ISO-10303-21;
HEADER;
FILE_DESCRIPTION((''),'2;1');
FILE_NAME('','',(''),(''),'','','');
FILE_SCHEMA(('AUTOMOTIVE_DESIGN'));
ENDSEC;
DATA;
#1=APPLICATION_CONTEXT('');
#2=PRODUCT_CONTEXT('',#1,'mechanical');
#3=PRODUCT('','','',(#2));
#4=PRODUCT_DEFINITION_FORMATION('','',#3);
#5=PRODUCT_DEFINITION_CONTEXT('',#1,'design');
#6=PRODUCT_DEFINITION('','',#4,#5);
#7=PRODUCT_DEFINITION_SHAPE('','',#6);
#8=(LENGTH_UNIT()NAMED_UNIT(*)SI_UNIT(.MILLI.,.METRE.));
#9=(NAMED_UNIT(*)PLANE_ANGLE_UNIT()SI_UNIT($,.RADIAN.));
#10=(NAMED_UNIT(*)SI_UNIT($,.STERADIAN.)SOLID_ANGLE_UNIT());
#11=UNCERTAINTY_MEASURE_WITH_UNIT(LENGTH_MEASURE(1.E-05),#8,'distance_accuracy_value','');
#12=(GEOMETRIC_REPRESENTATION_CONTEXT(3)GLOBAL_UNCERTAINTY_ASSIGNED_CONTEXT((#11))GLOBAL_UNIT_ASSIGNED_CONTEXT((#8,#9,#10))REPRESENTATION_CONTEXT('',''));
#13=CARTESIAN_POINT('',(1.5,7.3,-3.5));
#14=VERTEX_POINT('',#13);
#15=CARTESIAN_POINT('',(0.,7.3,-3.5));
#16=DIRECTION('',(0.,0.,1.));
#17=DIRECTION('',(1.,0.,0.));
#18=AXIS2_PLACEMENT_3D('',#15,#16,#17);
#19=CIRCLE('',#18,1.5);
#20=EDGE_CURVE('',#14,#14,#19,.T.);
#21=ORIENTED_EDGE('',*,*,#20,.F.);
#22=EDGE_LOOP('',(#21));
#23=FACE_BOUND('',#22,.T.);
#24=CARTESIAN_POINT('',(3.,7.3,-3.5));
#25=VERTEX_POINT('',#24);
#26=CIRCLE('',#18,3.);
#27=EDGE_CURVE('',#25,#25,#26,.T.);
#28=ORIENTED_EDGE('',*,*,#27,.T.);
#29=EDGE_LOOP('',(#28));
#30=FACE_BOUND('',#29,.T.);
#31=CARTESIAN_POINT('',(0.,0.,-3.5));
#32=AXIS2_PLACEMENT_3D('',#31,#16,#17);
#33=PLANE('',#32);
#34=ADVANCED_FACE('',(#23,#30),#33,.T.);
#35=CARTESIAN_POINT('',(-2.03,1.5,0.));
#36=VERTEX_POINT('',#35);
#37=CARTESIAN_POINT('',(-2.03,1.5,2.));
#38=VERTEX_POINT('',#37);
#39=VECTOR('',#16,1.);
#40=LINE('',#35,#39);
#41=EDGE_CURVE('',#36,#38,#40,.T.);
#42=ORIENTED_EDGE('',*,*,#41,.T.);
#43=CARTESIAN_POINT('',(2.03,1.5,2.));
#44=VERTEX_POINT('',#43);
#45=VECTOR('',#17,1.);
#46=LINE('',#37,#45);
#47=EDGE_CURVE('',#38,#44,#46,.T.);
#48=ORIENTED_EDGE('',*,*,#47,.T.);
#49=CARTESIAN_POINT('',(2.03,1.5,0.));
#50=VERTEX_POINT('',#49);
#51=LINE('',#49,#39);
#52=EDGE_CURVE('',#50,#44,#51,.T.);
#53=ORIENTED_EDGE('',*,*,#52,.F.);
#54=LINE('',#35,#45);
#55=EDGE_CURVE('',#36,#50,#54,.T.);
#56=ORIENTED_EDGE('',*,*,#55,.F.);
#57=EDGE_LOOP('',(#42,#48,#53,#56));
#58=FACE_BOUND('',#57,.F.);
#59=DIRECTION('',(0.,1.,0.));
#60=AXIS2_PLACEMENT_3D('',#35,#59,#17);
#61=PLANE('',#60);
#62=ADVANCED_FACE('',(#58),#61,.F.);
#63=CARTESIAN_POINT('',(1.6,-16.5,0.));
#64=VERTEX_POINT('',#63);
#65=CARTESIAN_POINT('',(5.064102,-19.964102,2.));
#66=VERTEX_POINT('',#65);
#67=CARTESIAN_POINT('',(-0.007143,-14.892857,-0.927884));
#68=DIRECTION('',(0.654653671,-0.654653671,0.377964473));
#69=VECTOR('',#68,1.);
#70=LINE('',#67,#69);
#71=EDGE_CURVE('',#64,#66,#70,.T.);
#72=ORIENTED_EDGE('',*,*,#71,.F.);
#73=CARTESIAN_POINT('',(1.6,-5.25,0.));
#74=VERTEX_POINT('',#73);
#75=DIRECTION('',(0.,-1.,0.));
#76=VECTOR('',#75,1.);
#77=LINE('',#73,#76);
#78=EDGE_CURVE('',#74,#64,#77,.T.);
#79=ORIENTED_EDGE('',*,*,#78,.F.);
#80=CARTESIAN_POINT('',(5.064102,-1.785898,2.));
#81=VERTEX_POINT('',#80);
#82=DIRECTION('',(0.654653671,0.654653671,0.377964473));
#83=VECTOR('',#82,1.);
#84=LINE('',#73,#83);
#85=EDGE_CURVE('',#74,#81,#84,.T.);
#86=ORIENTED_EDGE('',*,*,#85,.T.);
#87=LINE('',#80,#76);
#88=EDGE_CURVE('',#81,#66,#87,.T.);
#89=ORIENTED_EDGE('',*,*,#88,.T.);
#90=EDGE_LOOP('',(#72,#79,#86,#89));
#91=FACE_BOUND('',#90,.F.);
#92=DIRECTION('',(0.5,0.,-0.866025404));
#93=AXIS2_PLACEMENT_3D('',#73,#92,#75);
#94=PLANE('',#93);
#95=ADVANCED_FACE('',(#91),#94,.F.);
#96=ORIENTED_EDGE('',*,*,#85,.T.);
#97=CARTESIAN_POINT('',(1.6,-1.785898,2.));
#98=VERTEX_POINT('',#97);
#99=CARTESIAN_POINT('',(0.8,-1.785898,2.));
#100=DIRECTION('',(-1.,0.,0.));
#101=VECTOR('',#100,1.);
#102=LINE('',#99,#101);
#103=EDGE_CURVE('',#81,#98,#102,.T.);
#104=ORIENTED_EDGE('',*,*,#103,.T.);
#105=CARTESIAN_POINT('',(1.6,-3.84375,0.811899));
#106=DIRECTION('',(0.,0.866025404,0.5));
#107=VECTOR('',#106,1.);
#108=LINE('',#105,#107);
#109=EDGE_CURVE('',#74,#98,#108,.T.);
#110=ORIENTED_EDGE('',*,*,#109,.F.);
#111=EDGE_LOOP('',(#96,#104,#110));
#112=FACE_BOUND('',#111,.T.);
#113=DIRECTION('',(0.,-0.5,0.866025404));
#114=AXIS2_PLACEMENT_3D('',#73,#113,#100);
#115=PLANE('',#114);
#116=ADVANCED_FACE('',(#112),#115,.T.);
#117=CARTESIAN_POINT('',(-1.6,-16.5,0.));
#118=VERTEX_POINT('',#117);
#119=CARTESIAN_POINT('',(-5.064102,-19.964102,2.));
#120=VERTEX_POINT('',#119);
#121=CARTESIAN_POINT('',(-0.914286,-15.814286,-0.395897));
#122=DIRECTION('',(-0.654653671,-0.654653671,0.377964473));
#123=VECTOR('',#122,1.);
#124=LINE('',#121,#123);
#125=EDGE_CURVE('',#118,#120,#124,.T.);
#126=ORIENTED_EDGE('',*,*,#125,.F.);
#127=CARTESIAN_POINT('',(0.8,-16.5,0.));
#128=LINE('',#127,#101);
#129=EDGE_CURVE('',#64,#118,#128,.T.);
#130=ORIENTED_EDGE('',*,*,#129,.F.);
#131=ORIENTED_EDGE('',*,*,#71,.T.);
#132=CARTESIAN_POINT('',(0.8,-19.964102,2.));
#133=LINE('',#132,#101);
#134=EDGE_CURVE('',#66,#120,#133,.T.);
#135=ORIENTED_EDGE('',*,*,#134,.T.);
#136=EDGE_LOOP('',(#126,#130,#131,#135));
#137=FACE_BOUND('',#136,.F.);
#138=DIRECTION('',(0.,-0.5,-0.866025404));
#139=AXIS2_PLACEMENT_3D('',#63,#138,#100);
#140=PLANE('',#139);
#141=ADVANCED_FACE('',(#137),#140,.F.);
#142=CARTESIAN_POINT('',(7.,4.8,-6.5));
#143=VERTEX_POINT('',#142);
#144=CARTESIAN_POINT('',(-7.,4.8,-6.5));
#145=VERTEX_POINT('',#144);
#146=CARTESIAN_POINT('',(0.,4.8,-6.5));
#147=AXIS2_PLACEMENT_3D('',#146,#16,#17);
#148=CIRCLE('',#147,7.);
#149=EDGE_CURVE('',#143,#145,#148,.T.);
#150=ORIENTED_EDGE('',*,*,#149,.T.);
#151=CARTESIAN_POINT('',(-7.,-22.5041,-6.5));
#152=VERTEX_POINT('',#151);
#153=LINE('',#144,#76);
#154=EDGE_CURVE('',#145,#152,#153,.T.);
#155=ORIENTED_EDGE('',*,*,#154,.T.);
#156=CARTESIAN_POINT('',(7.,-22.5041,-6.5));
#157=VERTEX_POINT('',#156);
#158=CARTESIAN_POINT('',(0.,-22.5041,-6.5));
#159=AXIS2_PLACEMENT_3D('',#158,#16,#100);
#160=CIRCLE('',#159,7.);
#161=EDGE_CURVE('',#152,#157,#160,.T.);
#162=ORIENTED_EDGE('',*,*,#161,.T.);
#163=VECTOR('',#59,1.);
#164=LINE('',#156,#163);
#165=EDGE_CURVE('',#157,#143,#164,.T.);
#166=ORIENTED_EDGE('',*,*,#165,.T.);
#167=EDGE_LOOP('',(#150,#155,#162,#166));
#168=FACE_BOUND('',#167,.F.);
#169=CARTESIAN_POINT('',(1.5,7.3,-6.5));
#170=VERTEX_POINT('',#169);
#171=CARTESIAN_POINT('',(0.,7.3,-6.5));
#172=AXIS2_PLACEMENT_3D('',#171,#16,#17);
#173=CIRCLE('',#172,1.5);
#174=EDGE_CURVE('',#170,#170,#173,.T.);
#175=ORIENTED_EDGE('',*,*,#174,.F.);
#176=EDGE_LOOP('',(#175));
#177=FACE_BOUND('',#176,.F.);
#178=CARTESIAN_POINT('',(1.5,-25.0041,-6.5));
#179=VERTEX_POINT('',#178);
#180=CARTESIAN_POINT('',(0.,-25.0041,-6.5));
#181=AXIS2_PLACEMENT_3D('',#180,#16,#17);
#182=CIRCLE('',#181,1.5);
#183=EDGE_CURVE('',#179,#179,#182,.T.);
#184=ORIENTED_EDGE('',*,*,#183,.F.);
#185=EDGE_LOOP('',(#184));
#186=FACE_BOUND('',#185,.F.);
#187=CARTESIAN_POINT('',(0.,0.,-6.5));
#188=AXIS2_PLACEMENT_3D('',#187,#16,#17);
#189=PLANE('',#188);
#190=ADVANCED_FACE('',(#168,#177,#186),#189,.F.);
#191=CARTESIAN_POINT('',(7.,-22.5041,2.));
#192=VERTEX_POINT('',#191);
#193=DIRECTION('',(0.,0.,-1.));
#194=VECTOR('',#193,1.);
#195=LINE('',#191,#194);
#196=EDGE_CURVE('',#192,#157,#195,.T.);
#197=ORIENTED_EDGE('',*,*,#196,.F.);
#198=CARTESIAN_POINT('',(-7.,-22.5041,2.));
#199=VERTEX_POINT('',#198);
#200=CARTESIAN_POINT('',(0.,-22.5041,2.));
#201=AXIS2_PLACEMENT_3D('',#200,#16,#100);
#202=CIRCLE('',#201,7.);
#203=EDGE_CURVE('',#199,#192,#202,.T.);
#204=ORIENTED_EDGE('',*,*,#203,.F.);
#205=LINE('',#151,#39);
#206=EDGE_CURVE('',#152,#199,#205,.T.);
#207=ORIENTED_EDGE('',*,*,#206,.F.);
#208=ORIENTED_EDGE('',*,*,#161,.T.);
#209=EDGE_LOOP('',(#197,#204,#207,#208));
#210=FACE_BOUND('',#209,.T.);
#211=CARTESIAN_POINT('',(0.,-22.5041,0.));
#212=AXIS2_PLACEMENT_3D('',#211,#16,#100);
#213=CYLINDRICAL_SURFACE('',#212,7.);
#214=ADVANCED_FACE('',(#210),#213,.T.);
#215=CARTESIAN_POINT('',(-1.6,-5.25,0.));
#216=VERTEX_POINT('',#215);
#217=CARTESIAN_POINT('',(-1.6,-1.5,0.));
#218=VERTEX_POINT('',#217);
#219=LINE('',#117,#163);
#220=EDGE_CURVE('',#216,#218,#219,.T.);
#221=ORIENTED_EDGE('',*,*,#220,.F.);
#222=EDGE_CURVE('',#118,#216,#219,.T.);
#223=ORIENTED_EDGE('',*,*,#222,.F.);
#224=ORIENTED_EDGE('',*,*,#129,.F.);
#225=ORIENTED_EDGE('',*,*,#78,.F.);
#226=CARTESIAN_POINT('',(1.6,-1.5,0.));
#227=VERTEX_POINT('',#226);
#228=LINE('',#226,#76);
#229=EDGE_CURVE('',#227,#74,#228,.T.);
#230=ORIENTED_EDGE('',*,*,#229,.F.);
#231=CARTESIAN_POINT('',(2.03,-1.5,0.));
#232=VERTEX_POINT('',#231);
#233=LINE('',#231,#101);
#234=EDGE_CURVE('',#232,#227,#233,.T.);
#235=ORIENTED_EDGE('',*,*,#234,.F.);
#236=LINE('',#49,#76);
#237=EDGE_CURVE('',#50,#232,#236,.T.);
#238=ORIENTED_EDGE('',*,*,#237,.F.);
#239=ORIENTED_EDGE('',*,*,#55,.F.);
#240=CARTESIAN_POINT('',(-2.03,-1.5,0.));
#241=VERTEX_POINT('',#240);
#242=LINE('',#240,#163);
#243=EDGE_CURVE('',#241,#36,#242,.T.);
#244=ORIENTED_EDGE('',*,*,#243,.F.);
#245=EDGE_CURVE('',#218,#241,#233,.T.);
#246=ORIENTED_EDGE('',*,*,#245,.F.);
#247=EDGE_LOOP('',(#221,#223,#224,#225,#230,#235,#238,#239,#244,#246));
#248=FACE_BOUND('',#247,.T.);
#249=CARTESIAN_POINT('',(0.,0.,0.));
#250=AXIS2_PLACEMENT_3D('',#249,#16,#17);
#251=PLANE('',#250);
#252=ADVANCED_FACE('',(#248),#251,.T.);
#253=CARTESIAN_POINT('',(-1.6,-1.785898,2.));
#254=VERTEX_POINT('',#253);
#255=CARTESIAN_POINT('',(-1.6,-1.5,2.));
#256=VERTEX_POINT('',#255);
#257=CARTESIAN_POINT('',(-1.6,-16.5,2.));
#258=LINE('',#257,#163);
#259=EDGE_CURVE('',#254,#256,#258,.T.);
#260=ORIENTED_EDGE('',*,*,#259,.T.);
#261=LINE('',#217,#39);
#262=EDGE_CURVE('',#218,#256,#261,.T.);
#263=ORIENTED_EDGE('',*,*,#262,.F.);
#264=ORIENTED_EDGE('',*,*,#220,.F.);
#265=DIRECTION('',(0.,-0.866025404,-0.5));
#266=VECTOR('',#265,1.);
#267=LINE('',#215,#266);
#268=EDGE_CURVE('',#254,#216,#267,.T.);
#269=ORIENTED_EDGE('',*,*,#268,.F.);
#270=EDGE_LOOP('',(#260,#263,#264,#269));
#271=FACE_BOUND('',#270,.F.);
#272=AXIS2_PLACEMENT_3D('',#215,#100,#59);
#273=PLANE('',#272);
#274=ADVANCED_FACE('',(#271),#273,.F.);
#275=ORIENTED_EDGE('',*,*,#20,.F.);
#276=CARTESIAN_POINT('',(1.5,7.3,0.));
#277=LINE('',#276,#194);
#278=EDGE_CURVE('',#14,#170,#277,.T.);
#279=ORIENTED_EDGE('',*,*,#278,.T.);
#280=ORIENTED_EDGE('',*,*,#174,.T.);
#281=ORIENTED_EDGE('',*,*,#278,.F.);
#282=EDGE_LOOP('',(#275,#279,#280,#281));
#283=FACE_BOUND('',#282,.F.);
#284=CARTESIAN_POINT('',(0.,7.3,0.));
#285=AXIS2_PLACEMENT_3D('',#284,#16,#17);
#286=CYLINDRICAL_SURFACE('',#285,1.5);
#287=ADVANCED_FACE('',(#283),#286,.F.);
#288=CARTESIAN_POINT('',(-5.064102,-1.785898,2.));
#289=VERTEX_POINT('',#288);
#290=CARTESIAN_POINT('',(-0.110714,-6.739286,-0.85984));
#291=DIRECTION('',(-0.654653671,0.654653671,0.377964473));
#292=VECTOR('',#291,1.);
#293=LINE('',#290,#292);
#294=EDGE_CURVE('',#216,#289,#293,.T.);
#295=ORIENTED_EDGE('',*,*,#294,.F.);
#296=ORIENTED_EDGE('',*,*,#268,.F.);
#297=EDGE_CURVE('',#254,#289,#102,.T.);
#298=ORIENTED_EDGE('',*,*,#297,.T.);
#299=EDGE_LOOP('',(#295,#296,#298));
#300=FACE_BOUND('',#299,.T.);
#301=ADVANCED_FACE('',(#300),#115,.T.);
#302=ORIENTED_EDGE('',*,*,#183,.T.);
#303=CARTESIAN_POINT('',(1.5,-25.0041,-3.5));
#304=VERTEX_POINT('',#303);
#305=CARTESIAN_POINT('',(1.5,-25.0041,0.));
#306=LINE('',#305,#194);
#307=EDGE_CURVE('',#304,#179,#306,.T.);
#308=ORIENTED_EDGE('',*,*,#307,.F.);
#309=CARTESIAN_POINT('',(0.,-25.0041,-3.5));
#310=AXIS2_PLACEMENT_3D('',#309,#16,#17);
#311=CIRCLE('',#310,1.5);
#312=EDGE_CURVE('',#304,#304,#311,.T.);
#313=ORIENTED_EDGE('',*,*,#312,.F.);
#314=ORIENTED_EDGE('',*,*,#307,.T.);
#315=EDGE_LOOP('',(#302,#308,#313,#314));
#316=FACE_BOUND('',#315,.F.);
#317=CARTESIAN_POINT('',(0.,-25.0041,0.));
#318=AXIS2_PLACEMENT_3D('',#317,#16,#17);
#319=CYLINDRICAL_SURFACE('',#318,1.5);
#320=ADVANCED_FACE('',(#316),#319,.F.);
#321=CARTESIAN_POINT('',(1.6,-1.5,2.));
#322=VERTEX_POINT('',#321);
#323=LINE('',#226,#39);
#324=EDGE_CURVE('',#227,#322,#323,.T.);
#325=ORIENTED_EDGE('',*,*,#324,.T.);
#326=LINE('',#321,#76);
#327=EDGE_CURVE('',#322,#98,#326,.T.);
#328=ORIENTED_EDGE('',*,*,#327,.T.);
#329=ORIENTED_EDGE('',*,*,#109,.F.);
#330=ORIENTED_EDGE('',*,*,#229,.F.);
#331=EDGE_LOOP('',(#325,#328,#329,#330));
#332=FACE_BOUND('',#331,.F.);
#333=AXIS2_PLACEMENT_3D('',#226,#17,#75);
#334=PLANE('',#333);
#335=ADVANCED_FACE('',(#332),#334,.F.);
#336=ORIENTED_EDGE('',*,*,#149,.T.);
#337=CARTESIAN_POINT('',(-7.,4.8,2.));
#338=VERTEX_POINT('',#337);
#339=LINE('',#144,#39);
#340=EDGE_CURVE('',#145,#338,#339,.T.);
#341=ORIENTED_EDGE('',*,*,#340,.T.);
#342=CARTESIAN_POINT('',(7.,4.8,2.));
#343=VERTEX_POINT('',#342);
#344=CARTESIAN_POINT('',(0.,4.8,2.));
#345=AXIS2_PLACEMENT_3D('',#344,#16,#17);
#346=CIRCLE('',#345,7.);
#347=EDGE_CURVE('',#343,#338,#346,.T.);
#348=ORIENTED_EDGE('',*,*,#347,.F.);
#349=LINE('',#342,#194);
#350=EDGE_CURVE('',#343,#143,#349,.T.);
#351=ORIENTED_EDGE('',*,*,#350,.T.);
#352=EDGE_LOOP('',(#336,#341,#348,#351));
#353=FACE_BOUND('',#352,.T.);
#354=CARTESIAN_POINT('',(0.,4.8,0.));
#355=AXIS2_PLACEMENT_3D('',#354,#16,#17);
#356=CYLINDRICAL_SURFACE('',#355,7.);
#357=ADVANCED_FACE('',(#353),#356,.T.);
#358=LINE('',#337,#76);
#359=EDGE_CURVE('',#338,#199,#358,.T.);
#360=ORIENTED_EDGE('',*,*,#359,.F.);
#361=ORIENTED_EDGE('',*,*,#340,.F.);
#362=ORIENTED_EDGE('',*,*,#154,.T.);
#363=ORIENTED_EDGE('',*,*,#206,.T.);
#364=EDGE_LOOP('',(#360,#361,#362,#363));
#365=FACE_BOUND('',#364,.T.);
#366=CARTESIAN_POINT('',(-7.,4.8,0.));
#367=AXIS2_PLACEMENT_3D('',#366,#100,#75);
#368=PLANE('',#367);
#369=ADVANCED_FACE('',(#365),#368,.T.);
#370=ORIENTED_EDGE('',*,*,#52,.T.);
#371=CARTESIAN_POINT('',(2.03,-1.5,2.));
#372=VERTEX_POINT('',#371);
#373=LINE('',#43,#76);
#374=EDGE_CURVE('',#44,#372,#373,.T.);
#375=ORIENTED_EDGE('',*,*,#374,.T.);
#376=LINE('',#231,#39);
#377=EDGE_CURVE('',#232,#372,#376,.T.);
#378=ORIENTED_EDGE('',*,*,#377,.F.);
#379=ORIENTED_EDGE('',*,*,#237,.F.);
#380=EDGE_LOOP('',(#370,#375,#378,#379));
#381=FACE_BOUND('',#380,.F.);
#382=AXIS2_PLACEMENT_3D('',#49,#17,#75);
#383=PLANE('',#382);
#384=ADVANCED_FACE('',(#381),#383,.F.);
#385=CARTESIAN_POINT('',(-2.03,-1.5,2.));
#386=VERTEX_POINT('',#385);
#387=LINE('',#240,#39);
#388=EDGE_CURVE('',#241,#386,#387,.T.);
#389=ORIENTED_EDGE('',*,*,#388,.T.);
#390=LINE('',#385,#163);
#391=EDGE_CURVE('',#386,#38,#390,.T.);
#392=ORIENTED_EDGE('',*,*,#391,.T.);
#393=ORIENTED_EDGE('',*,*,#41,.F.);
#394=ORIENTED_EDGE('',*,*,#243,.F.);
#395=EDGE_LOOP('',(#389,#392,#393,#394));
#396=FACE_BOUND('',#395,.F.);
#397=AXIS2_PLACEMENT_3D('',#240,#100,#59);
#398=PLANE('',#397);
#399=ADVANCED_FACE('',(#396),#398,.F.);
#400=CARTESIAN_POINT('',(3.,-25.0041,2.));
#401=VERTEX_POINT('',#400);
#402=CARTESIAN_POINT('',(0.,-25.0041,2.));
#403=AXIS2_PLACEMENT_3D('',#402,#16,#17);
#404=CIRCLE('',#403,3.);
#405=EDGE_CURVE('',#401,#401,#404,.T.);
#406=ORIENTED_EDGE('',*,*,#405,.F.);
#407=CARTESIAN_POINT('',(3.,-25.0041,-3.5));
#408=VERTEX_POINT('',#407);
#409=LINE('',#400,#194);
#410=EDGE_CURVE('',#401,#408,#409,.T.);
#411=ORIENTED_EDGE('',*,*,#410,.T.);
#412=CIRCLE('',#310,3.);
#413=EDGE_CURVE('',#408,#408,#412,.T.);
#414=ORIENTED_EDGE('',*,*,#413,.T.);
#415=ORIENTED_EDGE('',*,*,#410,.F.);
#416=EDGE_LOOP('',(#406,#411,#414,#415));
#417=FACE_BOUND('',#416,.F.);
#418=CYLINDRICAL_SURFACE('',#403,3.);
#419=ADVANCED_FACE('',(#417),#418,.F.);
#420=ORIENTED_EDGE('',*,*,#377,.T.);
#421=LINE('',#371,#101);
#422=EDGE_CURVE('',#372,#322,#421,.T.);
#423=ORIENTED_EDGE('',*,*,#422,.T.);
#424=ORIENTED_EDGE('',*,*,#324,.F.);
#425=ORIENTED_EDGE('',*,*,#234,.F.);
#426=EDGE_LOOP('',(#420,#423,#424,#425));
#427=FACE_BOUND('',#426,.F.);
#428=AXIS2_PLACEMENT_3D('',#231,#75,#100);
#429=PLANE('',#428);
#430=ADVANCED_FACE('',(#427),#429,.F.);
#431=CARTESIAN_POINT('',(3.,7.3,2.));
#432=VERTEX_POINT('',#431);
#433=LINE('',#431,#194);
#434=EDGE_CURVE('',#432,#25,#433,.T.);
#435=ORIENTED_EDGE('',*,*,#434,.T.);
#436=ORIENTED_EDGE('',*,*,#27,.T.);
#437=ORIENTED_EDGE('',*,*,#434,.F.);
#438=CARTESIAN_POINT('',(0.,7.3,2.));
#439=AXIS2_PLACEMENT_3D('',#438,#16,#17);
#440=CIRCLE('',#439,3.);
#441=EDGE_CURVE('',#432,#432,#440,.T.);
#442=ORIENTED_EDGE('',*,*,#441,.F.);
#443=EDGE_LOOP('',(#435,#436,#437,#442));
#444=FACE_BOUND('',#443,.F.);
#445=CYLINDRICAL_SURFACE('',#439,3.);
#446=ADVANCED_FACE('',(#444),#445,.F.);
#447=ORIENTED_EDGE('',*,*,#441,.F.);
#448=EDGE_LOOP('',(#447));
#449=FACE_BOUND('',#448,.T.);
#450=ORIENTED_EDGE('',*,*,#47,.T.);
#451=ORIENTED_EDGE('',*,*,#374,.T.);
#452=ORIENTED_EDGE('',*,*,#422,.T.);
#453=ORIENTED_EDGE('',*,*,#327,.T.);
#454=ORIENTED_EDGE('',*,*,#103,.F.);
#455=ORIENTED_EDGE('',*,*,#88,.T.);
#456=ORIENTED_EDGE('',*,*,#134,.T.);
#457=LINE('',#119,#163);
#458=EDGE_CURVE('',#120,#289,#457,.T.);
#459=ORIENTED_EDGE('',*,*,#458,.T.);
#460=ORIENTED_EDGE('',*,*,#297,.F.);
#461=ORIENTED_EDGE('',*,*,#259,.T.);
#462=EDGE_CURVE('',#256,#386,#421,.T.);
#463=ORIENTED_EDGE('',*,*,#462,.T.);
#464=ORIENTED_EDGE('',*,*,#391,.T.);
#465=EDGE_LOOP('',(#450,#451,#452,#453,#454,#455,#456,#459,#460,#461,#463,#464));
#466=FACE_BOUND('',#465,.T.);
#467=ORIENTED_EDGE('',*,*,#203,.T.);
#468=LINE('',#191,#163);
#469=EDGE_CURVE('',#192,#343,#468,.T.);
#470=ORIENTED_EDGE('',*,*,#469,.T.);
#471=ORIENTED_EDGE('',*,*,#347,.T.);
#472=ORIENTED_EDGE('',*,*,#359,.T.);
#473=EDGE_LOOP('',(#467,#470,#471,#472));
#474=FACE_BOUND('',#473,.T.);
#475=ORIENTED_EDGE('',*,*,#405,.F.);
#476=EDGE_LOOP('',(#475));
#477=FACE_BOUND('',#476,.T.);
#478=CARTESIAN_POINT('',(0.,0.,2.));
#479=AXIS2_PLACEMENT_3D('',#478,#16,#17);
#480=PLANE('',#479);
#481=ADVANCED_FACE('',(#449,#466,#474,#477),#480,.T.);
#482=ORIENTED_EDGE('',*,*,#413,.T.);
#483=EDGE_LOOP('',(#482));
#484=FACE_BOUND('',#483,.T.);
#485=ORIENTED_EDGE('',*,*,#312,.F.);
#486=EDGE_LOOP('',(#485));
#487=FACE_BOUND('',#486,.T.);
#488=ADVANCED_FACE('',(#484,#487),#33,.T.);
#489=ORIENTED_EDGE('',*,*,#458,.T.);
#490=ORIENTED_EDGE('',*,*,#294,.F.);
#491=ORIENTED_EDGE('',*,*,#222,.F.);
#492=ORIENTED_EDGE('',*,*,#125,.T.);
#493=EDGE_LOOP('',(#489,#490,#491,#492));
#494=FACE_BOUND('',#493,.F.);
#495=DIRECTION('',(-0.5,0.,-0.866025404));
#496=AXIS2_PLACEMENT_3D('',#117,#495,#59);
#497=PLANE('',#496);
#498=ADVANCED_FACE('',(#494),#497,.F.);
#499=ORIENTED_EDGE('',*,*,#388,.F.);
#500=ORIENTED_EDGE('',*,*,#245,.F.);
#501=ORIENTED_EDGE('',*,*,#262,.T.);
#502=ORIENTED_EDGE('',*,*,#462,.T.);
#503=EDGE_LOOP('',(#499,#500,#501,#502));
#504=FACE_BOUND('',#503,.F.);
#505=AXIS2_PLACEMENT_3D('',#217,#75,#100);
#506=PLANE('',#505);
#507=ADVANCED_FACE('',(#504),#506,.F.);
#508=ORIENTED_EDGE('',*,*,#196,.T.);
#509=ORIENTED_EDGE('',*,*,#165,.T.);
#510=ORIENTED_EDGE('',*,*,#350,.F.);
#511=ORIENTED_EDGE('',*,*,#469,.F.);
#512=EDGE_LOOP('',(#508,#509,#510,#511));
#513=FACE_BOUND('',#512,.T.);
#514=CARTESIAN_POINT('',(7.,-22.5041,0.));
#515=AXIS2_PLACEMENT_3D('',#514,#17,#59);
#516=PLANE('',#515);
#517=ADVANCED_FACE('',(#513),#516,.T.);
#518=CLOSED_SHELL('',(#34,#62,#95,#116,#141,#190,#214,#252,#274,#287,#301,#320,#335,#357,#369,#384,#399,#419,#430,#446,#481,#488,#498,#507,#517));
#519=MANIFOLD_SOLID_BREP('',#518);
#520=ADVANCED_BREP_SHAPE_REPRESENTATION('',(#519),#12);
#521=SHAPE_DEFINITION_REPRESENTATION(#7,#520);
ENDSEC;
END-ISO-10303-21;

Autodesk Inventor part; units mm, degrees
ref_plane "YZ Plane" through (0, 0, 0) normal (1, 0, 0) x (0, 1, 0)
ref_plane "XZ Plane" through (0, 0, 0) normal (0, 1, 0) x (-1, 0, 0)
ref_plane "XY Plane" through (0, 0, 0) normal (0, 0, 1) x (1, 0, 0)
sketch "Эскиз1" plane through (0, 0, 0) normal (0, 0, 1) x (1, 0, 0)
  line L0 (-2.03, 1.5) -> (2.03, 1.5)
  line L1 (2.03, 1.5) -> (2.03, -1.5)
  line L2 (2.03, -1.5) -> (-2.03, -1.5)
  line L3 (-2.03, -1.5) -> (-2.03, 1.5)
  line L4 (-2.03, 1.5) -> (2.03, -1.5) construction
  line L5 (2.03, 1.5) -> (-2.03, -1.5) construction
  line L6 (-1.6, -1.5) -> (1.6, -1.5)
  line L7 (1.6, -1.5) -> (1.6, -16.5)
  line L8 (1.6, -16.5) -> (-1.6, -16.5)
  line L9 (-1.6, -16.5) -> (-1.6, -1.5)
  line L10 (0, 4.8) -> (0, -22.5041) construction
  line L11 (-7, 4.8) -> (-7, -22.5041)
  line L12 (7, -22.5041) -> (7, 4.8)
  arc A0 (7, 4.8) -> (-7, 4.8) centre (0, 4.8) ccw
  arc A1 (-7, -22.5041) -> (7, -22.5041) centre (0, -22.5041) ccw
  line L13 (-1.6, -1.5) -> (-1.6, -9)
  line L14 (1.6, -1.5) -> (1.6, -9)
  line L15 (-1.6, -5.25) -> (-5.6947, -16.5)
  line L16 (1.6, -5.25) -> (5.6947, -16.5)
  arc A2 (-5.6947, -16.5) -> (5.6947, -16.5) centre (0, -0.854) ccw
  line L17 (1.6, -5.25) -> (-1.6, -5.25)
  circle A3 centre (0, -25.0041) radius 1.5
  circle A4 centre (0, 7.3) radius 1.5
  point P0 (0, 0)
  point P1 (0, 0)
  point P2 (0, 0)
  point P3 (0, 0)
  point P4 (0, -1.5)
  point P5 (0, 0)
  point P6 (0, -8.8521)
  point P7 (1.6, -5.25)
  point P8 (-1.6, -5.25)
  point P9 (1.6, -1.5)
  dimension "d0" = 4.06
  dimension "d1" = 3
  dimension "d2" = 3.2
  dimension "d3" = 15
  dimension "d4" = 14
  dimension "d5" = 20
  dimension "d6" = 20
  dimension "d15" = 3
  dimension "d16" = 3
  dimension "d17" = 3
  dimension "d18" = 3
  dimension "d20" = 6
  dimension "d24" = 16.1521
extrude "Выдавливание1" add sketch "Эскиз1" along normal blind 2 and the other way blind 6.5 contours L0 L1 L2 L3 | L2 L7 L17 L9 | L17 L7 L8 L9 | L9 L8 L7 L16 A2 L15 | A0 L12 A1 L11
extrude "Выдавливание2" cut sketch "Эскиз1" along normal up to surface (2 mm away) draft 60 contours L17 L7 L8 L9
extrude "Выдавливание3" cut sketch "Эскиз1" along normal up to surface (2 mm away) contours L0 L1 L2 L3 | L2 L7 L17 L9
sketch "Эскиз2" plane through (0, 0, 2) normal (0, 0, 1) x (1, 0, 0)
  circle A0 centre (0, 7.3) radius 1.5 projected
  circle A1 centre (0, -25.0041) radius 1.5 projected
  circle A2 centre (0, 7.3) radius 3
  circle A3 centre (0, -25.0041) radius 3
  point P0 (0, 0)
  dimension "d21" = 6
extrude "Выдавливание4" cut sketch "Эскиз2" against normal blind 5.5 contours A0 | A1 | A2 | A3
properties part number "Установка датчика холла"
